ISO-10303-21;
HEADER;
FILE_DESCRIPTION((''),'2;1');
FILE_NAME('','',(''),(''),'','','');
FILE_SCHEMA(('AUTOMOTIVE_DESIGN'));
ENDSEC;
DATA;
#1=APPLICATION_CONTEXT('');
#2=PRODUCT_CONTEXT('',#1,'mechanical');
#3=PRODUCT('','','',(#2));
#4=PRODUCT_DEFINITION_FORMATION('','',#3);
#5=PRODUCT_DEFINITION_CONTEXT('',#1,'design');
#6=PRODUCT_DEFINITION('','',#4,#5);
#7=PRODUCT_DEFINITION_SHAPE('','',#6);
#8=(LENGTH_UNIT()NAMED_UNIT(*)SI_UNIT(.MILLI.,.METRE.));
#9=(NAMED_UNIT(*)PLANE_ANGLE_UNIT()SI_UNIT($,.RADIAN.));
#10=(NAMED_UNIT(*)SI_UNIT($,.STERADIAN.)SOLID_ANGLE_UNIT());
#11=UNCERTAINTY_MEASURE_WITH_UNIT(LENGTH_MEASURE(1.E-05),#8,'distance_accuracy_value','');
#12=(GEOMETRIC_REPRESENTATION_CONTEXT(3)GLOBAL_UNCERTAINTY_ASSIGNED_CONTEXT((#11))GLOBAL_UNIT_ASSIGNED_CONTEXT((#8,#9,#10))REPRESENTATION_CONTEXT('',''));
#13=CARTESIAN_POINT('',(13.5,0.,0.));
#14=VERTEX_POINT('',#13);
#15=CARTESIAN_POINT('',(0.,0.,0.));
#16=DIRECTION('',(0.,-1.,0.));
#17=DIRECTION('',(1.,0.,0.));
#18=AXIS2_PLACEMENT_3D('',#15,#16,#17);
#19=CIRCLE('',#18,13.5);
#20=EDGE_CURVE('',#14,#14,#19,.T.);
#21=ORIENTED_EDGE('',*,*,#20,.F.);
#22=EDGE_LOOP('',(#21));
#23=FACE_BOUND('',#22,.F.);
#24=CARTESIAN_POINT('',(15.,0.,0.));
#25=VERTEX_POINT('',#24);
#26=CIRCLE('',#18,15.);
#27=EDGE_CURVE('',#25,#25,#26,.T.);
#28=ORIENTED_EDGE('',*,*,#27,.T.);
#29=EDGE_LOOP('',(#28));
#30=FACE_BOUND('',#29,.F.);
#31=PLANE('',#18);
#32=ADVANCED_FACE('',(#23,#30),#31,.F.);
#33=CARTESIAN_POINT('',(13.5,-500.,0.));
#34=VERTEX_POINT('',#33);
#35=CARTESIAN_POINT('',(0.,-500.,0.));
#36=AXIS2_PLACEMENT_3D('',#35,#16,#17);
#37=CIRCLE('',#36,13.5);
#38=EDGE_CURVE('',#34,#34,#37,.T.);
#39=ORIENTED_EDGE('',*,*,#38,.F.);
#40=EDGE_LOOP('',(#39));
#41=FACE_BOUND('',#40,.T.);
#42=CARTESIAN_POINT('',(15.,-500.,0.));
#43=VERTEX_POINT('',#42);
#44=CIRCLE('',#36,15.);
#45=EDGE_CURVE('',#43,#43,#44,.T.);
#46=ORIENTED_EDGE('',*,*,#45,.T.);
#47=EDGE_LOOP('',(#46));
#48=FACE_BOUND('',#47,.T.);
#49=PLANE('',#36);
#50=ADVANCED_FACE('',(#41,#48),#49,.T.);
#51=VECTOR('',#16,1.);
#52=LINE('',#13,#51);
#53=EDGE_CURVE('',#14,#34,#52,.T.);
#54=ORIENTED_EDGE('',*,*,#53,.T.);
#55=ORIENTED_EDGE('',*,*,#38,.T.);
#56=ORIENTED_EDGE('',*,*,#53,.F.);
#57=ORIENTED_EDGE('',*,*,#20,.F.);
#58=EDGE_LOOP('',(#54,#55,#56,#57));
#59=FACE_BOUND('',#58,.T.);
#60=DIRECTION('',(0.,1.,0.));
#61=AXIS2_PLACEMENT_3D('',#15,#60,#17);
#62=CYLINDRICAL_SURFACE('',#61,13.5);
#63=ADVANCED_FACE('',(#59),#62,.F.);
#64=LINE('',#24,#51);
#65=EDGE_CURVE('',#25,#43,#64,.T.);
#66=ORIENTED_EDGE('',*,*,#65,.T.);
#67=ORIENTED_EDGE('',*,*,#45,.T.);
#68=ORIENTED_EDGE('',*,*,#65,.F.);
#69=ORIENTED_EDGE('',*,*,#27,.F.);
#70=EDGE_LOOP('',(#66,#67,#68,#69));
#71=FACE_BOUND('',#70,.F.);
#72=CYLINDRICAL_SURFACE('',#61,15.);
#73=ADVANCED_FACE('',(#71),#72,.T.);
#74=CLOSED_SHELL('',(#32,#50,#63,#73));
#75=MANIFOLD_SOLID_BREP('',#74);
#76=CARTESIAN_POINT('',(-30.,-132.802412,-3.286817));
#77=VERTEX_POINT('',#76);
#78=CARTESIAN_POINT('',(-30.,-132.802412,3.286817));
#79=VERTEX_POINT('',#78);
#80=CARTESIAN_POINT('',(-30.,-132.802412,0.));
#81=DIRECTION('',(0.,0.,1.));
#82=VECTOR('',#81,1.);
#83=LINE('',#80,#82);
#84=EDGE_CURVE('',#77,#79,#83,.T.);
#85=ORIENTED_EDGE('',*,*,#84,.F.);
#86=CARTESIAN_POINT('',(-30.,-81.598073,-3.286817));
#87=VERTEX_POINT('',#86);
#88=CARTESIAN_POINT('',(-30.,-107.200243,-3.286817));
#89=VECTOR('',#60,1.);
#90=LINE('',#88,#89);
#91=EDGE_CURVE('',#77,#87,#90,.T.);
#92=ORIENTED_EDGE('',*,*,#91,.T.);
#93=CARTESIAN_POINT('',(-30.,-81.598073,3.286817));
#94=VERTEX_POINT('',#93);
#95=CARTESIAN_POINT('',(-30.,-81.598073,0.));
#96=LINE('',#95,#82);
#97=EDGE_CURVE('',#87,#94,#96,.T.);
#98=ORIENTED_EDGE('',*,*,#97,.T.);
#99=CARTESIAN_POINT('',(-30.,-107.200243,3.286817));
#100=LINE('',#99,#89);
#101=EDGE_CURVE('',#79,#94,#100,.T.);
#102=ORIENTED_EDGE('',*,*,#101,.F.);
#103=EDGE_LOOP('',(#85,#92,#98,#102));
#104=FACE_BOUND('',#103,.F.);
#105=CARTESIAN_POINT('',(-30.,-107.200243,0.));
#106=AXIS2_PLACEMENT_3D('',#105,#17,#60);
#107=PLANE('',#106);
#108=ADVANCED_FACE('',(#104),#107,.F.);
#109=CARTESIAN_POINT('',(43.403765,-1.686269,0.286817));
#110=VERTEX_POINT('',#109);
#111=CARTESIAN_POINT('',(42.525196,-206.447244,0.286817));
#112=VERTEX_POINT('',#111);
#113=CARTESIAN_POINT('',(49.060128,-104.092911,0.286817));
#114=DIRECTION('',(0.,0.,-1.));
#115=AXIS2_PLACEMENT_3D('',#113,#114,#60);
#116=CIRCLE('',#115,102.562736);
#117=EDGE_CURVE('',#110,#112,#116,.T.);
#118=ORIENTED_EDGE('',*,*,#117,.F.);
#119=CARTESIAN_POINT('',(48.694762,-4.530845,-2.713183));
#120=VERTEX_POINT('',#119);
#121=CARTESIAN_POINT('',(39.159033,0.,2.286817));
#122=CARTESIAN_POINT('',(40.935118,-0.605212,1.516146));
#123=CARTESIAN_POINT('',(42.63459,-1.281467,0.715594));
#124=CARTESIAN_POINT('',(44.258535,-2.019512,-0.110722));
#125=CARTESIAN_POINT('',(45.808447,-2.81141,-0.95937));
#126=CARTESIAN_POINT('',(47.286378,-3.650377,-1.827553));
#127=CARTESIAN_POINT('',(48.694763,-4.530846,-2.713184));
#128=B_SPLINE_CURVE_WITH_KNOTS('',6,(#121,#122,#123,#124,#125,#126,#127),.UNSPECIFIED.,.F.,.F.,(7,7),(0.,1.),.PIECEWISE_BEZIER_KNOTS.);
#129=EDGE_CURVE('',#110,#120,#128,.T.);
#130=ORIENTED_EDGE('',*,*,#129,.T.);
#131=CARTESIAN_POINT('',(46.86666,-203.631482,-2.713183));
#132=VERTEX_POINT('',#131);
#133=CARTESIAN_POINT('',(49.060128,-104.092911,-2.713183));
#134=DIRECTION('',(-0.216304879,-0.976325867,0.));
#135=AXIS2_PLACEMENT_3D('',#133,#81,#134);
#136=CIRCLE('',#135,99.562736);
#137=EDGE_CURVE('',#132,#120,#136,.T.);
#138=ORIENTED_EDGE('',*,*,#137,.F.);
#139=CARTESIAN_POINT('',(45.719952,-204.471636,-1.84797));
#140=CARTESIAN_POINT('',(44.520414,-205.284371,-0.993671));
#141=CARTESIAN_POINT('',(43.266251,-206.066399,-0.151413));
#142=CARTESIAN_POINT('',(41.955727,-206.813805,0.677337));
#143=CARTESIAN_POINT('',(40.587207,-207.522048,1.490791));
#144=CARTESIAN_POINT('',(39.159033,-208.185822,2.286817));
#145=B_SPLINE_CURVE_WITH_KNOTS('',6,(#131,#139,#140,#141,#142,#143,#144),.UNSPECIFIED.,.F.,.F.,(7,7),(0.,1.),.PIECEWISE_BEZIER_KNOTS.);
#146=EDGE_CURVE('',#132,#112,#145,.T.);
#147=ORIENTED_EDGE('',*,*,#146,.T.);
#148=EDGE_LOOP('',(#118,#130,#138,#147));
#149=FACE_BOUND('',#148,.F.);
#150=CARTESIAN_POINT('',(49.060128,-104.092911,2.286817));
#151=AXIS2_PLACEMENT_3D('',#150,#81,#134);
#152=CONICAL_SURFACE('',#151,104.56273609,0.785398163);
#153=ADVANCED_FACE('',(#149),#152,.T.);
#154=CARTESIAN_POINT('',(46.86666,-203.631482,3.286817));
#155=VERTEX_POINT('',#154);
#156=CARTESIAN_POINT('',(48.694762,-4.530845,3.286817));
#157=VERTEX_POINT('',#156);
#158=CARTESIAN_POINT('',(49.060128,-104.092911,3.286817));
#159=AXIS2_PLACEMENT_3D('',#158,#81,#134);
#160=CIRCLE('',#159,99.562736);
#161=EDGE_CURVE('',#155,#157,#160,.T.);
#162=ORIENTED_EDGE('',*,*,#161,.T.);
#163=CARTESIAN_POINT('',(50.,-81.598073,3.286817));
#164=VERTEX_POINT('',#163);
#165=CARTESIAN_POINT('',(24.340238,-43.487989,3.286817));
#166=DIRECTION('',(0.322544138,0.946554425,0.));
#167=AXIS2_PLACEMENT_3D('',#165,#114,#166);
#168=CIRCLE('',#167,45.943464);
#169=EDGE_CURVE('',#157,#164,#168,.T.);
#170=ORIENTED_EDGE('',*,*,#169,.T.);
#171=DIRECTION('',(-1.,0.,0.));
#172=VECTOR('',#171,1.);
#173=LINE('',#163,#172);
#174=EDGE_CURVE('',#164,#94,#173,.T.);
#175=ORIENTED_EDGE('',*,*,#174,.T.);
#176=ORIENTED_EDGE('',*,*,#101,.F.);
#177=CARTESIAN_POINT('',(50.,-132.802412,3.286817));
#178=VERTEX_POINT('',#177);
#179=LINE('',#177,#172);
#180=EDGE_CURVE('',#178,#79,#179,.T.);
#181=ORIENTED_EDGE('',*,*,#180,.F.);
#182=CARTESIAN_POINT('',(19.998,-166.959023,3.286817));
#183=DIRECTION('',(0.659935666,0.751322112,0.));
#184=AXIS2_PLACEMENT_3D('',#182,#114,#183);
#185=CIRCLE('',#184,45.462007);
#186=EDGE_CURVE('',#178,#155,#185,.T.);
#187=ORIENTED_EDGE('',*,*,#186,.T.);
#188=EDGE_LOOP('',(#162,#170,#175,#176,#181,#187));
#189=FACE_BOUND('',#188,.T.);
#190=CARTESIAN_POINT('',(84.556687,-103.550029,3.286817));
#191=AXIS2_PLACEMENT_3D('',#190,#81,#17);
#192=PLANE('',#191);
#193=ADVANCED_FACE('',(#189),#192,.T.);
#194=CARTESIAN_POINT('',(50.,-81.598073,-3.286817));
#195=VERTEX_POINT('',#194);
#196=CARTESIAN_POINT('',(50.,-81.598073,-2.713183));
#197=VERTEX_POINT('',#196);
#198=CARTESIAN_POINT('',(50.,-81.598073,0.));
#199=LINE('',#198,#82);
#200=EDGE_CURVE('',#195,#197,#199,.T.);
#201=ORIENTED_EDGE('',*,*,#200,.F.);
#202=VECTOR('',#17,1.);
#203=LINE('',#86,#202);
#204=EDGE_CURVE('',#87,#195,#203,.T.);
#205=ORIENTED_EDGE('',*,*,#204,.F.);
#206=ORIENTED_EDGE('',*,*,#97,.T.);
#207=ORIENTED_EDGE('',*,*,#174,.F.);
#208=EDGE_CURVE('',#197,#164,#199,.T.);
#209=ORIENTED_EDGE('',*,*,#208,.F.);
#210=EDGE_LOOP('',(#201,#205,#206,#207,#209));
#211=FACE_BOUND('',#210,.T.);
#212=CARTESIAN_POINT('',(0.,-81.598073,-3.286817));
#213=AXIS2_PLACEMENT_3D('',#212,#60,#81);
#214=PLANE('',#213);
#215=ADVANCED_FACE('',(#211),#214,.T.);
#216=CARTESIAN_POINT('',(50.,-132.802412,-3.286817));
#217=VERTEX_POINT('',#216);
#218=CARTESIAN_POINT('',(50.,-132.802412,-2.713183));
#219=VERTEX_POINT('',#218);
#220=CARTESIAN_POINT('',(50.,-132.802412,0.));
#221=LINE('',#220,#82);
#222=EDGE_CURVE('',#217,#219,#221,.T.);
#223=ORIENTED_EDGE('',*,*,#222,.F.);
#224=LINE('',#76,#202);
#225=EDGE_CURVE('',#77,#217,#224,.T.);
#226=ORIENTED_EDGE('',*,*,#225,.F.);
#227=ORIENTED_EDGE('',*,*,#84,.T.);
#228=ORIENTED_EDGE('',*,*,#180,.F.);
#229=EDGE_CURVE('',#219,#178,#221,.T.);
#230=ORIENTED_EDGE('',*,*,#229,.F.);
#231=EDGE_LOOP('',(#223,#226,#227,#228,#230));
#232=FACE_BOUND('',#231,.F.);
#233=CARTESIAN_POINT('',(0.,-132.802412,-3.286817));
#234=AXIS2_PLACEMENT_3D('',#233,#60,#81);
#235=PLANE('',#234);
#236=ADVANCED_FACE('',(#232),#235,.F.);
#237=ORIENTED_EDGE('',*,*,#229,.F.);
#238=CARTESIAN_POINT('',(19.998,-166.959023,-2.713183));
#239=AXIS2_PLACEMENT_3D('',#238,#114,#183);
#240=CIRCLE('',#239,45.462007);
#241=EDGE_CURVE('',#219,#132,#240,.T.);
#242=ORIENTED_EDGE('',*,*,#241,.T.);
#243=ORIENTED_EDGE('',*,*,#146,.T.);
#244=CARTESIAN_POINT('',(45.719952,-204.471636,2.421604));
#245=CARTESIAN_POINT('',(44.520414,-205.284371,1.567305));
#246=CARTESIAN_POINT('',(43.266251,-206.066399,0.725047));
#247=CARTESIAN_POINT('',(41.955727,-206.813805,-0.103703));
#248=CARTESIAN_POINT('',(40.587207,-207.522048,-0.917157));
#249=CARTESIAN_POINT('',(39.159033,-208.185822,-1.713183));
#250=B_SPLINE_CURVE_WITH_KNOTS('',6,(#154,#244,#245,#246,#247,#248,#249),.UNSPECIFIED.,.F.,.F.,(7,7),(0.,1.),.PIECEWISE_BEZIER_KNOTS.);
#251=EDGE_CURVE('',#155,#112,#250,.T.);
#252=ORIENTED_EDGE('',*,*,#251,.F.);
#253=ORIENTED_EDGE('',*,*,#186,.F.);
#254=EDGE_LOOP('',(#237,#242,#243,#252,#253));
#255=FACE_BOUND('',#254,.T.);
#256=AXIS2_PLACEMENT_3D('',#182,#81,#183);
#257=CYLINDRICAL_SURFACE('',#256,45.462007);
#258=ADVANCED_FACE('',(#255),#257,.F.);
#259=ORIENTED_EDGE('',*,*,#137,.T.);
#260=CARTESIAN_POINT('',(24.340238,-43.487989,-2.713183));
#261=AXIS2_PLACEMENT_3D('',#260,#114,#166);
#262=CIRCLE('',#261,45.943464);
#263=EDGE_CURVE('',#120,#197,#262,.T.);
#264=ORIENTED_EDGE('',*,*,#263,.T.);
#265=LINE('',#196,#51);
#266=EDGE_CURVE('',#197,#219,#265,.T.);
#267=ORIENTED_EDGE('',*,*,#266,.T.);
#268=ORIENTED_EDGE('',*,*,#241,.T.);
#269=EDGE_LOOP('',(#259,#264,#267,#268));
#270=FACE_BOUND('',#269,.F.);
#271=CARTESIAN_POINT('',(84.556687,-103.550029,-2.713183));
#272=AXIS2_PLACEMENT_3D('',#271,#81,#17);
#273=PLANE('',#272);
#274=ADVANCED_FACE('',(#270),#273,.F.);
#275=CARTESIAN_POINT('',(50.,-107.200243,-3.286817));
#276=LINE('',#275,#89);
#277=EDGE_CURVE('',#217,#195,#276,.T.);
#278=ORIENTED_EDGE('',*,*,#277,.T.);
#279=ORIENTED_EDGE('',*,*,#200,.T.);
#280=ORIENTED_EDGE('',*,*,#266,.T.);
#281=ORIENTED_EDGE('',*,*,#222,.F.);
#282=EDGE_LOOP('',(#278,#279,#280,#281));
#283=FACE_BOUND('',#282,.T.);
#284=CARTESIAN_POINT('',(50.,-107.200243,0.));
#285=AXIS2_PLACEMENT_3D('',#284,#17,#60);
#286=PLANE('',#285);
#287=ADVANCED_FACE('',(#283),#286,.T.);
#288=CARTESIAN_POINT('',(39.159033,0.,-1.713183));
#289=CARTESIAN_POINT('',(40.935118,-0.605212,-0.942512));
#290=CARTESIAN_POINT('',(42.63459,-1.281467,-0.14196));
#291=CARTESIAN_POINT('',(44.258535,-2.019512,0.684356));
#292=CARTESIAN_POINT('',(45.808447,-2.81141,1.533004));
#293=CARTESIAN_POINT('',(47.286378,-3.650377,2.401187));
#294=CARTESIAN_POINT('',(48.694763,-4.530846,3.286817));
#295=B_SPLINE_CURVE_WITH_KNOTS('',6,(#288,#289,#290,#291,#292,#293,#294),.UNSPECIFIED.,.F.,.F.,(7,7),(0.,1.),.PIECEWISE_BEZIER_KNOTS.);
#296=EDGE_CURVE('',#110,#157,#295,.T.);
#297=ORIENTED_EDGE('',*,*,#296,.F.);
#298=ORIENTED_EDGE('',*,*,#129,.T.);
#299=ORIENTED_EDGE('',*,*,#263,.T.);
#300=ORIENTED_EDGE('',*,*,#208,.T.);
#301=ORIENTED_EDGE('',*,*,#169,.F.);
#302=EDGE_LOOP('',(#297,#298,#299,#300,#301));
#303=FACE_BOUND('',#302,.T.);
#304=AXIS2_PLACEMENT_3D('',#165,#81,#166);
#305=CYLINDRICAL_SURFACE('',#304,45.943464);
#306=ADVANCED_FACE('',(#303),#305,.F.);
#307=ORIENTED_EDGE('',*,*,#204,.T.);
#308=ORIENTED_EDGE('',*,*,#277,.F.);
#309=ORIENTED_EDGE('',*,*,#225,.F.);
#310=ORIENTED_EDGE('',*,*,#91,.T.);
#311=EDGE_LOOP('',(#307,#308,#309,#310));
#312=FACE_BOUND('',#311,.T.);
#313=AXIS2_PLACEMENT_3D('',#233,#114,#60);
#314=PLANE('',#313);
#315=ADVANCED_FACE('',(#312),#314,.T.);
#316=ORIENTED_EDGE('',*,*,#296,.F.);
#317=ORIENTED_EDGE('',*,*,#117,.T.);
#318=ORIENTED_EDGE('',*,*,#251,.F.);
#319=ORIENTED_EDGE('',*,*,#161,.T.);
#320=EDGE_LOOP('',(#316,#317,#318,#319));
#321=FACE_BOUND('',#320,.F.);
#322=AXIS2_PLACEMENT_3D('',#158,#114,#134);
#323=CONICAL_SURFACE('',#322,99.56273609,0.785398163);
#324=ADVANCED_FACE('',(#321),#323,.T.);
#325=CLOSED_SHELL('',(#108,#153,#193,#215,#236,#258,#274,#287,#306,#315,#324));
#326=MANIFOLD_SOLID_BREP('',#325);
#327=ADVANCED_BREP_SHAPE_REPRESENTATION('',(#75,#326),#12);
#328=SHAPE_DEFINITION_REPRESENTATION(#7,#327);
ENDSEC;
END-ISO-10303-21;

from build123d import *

# Parameters (mm, degrees)
F0_R          = 15
F0_R_2        = 13.5
F1_DEPTH      = 500
F2_W          = 51.2043386698
F2_H          = 6.5736337565
F3_DEPTH      = 50
F3_DEPTH_BACK = 30
F5_DEPTH      = 6
F6_T2_ANGLE   = 204.9841859294
F6_T4_ANGLE   = 204.9841859294


# Not quite as in the source:
# - a fillet or chamfer that OpenCascade refuses, or shapes differently, is made with other operations: its cross-section is extruded or revolved along the edge and cut away or added


with BuildPart() as f1:
    # F0 (on Front) → F1 (new body)
    with BuildSketch(Plane.XZ):
        Circle(F0_R)
        Circle(F0_R_2, mode=Mode.SUBTRACT)
    extrude(amount=F1_DEPTH)


with BuildPart() as f3:
    # F2 (on Right) → F3 (new body, two sides)
    with BuildSketch(Plane.YZ) as f3_sk:
        with Locations((-107.200242579, 0)):
            Rectangle(F2_W, F2_H)
    extrude(amount=F3_DEPTH)
    extrude(f3_sk.sketch, amount=-F3_DEPTH_BACK)

    # F4 (on face) → F5 (join)
    with BuildSketch(Plane.XY.offset(3.2868168782)):
        with BuildLine():
            ThreePointArc((39.1590334475, 0), (69.8835121208, -37.437195382), (50, -81.5980732441))
            Line((50, -81.5980732441), (50, -132.8024119139))
            ThreePointArc((50, -132.8024119139), (64.9970619773, -173.4303852551), (39.1590334475, -208.1858217716))
            ThreePointArc((39.1590334475, -208.1858217716), (153.6228645246, -104.0929108858), (39.1590334475, 0))
        make_face()
    extrude(amount=-F5_DEPTH)

    # F6: chamfer of 5 on 2 edges, made by hand

    # F6_s1 → F6_t2 (revolve, cut)
    with BuildSketch(Plane(origin=(68.7474753005, -15.2309949436, 0), x_dir=(0, 0, 1), z_dir=(-0.9763258673, 0.2163048793, 0))):
        Polygon((2.2868168782, -195.5793924312), (-2.7131831218, -190.5793924312), (-2.7131831218, -195.5793924312), align=None)
    revolve(axis=Axis((49.0601284346, -104.0929108858, -2.7131831218), (0, 0, 1)), revolution_arc=F6_T2_ANGLE, mode=Mode.SUBTRACT)

    # F6_s3 → F6_t4 (revolve, cut)
    with BuildSketch(Plane(origin=(68.7474753005, -15.2309949436, 0), x_dir=(0, 0, 1), z_dir=(-0.9763258673, 0.2163048793, 0))):
        Polygon((3.2868168782, -190.5793924312), (-1.7131831218, -195.5793924312), (3.2868168782, -195.5793924312), align=None)
    revolve(axis=Axis((49.0601284346, -104.0929108858, 3.2868168782), (0, 0, 1)), revolution_arc=F6_T4_ANGLE, mode=Mode.SUBTRACT)


solid = Compound([f1.part, f3.part])
